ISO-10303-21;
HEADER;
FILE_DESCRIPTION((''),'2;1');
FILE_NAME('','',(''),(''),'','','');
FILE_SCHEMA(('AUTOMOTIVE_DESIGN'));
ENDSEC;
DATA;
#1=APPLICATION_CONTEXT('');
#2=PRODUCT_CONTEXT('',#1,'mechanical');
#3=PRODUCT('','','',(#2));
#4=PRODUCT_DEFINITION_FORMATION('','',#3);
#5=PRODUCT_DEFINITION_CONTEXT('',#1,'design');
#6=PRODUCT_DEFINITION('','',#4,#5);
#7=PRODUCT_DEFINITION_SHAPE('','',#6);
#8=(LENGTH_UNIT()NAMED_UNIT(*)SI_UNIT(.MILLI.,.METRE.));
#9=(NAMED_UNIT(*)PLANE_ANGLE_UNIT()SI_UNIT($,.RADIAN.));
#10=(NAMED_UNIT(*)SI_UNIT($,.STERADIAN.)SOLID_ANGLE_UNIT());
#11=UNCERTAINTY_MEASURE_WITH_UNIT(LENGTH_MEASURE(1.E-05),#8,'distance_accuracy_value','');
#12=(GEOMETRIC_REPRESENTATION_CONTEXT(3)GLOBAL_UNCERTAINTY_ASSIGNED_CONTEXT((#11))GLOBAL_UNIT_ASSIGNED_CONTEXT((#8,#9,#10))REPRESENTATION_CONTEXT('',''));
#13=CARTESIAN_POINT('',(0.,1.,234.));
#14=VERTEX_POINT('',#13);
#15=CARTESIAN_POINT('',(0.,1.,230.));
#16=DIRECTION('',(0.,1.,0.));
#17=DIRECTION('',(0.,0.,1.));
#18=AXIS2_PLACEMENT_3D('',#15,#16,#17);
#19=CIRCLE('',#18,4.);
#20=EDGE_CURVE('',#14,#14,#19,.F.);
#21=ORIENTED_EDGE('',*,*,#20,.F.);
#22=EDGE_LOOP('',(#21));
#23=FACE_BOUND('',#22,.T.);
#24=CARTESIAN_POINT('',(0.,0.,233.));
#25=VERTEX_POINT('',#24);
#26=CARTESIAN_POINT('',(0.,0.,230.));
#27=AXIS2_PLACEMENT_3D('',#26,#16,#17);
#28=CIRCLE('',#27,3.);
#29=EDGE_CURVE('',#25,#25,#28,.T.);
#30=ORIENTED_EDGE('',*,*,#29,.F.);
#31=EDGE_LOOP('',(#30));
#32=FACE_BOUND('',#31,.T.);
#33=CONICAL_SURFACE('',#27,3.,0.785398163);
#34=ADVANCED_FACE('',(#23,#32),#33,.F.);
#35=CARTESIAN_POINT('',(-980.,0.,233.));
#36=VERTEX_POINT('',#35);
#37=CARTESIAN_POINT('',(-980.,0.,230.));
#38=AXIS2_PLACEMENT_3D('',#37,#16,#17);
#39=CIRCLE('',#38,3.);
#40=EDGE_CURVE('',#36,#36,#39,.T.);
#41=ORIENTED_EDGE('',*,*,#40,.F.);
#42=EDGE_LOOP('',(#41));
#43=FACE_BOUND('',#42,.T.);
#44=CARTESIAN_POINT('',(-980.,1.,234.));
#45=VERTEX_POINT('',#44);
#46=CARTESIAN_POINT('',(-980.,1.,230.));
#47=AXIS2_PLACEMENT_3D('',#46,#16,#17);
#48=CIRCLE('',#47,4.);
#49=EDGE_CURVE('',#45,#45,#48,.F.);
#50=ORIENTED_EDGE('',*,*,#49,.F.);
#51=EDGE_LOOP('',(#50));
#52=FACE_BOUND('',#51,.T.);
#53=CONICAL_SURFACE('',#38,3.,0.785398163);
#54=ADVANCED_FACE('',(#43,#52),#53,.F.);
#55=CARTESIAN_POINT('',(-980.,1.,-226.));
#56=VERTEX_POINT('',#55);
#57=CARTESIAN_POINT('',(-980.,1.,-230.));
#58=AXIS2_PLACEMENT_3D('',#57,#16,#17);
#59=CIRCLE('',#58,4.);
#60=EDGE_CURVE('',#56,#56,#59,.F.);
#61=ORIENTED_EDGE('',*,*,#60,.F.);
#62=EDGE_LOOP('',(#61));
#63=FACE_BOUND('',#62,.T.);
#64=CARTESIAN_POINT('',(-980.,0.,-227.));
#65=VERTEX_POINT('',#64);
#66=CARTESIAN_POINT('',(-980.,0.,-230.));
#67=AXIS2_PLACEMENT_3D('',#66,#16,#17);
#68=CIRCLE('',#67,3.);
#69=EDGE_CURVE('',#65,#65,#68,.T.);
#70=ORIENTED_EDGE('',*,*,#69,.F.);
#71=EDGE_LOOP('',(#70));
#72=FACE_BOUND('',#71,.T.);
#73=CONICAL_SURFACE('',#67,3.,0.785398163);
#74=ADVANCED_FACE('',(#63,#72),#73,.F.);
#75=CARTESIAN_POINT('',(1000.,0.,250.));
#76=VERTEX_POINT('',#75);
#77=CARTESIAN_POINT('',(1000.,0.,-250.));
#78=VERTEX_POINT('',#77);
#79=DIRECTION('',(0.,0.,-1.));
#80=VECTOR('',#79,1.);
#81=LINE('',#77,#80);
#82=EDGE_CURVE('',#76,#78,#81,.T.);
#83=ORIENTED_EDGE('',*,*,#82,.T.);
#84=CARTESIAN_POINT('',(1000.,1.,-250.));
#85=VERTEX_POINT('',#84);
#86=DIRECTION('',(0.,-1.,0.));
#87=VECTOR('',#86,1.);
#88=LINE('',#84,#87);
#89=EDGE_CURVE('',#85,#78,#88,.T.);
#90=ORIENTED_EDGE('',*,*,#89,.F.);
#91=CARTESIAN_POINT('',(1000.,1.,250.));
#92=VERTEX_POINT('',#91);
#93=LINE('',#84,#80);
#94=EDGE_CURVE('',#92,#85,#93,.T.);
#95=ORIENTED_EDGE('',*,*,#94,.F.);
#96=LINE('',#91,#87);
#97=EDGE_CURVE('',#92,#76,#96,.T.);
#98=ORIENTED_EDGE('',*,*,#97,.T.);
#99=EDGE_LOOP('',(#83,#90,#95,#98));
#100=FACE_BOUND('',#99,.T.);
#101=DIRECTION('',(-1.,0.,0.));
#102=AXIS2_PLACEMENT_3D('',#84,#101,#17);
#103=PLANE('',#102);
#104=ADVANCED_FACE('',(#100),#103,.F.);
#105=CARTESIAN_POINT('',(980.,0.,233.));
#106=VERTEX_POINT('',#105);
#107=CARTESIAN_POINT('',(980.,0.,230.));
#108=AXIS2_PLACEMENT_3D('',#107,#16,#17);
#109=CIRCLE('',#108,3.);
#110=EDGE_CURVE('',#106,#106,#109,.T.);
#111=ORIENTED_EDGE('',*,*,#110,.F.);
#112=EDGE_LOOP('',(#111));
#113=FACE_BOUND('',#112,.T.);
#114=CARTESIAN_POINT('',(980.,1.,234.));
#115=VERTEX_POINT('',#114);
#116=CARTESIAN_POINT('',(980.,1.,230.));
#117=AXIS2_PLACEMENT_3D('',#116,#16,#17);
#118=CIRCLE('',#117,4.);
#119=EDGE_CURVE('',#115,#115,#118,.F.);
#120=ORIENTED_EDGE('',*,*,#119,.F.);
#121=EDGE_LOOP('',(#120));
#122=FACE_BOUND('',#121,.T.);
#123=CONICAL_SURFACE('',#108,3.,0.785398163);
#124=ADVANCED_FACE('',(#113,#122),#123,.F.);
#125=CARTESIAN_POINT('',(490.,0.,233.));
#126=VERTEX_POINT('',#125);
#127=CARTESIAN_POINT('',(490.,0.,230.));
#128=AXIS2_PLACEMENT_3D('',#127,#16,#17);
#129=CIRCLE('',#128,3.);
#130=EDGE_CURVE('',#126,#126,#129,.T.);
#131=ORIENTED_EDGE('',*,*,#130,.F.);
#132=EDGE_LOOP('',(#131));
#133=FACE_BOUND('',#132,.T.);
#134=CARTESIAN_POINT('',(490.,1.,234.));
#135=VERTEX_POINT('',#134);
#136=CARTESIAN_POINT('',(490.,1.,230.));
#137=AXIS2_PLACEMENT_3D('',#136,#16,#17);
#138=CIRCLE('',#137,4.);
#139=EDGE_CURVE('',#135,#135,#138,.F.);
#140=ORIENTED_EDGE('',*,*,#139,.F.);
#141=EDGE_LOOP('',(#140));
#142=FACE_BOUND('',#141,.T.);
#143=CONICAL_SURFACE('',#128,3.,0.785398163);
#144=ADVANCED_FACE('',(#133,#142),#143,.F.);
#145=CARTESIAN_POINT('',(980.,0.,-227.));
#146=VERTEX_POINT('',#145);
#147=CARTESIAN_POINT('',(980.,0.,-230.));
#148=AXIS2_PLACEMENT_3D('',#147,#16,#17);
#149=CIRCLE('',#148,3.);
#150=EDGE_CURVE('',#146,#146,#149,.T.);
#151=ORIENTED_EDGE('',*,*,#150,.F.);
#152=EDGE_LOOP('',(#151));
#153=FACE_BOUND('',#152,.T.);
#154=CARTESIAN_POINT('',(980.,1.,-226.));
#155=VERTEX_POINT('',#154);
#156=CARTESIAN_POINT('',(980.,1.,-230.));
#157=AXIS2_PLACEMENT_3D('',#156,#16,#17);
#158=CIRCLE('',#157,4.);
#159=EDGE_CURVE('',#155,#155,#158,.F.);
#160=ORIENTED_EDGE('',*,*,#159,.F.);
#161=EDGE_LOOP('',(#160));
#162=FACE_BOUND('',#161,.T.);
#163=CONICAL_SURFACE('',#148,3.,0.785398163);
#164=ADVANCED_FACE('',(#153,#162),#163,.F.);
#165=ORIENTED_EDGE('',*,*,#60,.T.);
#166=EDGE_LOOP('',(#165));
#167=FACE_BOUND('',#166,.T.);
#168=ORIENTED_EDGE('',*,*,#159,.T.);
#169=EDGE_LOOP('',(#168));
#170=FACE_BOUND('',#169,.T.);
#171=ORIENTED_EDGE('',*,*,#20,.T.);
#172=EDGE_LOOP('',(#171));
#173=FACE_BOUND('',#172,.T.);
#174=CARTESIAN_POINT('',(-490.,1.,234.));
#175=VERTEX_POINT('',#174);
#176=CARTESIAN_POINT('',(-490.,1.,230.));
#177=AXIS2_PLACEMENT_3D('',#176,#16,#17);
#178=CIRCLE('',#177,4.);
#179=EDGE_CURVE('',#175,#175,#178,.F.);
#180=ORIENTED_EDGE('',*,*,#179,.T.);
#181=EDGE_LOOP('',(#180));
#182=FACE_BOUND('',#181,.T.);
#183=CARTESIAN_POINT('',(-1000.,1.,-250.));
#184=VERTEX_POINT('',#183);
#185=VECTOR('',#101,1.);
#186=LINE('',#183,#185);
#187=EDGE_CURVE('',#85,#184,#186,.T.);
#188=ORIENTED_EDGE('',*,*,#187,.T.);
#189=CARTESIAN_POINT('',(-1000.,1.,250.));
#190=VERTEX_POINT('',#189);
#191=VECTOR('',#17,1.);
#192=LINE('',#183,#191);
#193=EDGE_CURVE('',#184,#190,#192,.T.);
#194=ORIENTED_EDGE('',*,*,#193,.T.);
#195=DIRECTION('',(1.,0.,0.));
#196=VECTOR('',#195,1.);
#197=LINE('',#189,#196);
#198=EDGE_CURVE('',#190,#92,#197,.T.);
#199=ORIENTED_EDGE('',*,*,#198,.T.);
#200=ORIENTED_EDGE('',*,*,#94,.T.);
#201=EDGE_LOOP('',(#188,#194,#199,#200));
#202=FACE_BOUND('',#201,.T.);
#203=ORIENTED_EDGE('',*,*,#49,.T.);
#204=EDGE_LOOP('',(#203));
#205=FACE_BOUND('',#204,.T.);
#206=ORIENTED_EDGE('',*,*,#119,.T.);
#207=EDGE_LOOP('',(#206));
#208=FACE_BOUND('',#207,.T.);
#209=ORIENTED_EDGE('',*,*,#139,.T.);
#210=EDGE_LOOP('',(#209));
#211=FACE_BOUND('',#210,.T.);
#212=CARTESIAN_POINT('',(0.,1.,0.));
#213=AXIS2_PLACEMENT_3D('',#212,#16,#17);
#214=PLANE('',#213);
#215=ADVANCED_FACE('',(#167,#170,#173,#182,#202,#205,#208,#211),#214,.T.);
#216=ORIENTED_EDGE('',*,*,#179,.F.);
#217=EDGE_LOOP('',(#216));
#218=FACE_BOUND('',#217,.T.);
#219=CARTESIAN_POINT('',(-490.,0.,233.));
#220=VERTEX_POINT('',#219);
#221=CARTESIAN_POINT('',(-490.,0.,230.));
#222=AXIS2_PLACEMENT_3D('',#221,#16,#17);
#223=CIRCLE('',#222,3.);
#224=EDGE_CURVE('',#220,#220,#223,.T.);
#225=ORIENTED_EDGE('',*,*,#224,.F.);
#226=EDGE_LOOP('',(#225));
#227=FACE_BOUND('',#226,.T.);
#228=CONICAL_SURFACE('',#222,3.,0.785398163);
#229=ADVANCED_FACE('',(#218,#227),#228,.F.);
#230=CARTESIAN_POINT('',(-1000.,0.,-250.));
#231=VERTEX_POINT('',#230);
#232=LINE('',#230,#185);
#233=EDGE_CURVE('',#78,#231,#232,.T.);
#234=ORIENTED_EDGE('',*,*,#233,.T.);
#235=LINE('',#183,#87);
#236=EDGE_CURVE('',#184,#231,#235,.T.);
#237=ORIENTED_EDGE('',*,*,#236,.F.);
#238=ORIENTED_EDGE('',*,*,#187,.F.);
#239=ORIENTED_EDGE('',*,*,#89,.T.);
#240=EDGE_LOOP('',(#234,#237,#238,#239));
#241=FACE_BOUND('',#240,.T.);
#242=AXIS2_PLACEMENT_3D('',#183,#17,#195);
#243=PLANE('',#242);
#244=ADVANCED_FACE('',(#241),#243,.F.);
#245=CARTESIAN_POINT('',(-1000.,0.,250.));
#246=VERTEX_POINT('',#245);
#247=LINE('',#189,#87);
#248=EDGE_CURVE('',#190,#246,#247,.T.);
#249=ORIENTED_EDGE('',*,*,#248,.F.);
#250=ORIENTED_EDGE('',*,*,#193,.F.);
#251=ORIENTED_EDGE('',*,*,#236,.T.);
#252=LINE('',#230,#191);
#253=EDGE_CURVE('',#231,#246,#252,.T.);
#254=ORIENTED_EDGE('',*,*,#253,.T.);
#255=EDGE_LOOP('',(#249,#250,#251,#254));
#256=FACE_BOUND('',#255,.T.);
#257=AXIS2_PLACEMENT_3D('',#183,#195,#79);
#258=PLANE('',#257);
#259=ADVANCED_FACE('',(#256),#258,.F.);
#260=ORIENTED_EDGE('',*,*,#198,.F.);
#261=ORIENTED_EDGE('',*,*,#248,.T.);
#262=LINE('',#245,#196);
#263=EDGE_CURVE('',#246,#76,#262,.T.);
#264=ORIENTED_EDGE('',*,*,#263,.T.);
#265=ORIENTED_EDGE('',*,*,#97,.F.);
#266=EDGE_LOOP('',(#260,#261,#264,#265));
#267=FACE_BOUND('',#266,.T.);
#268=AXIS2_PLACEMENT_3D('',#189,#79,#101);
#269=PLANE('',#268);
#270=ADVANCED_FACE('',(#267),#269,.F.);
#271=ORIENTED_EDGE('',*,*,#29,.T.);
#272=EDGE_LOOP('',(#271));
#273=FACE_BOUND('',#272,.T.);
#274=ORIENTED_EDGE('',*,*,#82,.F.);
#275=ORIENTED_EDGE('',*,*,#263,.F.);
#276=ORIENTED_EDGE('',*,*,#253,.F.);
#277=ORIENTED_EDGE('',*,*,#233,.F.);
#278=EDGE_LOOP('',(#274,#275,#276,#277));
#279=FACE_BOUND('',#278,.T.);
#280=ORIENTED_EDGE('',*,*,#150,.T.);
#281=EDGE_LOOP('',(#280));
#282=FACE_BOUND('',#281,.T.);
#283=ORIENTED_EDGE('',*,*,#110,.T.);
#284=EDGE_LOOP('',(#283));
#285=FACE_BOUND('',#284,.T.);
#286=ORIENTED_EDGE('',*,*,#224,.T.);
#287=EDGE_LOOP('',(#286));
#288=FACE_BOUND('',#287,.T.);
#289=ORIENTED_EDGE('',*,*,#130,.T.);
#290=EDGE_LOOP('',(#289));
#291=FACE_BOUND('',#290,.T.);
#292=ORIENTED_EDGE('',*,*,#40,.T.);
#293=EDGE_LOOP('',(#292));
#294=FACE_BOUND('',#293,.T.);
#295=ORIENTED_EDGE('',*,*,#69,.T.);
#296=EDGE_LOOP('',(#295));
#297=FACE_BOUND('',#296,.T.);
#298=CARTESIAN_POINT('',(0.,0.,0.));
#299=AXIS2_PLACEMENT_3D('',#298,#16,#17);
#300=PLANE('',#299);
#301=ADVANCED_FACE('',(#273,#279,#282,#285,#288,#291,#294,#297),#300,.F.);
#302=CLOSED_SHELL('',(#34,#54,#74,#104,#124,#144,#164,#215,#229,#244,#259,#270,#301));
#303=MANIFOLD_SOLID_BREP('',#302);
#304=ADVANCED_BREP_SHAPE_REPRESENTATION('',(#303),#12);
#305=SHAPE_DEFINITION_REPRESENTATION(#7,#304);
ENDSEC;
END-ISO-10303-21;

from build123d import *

# Parameters (mm, degrees)
SKETCH1_W           = 2000
SKETCH1_H           = 500
SKETCH1_R           = 3
BOSS_EXTRUDE1_DEPTH = 1
CHAMFER1_SIZE       = 1


with BuildPart() as part:
    # Sketch1 → Boss-Extrude1 (new body)
    with BuildSketch(Plane(origin=(0, 0, 0), x_dir=(1, 0, 0), z_dir=(0, 1, 0))):
        Rectangle(SKETCH1_W, SKETCH1_H)
        with Locations(Location((-980, -230, 0), (0, 0, 270))):
            Circle(SKETCH1_R, mode=Mode.SUBTRACT)
        with Locations(Location((980, -230, 0), (0, 0, 270))):
            Circle(SKETCH1_R, mode=Mode.SUBTRACT)
        with Locations(Location((0, -230, 0), (0, 0, 270))):
            Circle(SKETCH1_R, mode=Mode.SUBTRACT)
        with Locations(Location((-490, -230, 0), (0, 0, 270))):
            Circle(SKETCH1_R, mode=Mode.SUBTRACT)
        with Locations(Location((490, -230, 0), (0, 0, 270))):
            Circle(SKETCH1_R, mode=Mode.SUBTRACT)
        with Locations(Location((980, 230, 0), (0, 0, 270))):
            Circle(SKETCH1_R, mode=Mode.SUBTRACT)
        with Locations(Location((-980, 230, 0), (0, 0, 270))):
            Circle(SKETCH1_R, mode=Mode.SUBTRACT)
    extrude(amount=BOSS_EXTRUDE1_DEPTH)

    # Chamfer1
    chamfer1_edges = [part.edges().sort_by_distance(p)[0] for p in [
        (980, 1, -233),
        (-980, 1, -233),
        (-980, 1, 227),
        (980, 1, 227),
        (0, 1, 227),
        (-490, 1, 227),
        (490, 1, 227),
    ]]
    chamfer(chamfer1_edges, length=CHAMFER1_SIZE - 0.0001)  # a hair under: the kernel refuses the full size


solid = part.part
